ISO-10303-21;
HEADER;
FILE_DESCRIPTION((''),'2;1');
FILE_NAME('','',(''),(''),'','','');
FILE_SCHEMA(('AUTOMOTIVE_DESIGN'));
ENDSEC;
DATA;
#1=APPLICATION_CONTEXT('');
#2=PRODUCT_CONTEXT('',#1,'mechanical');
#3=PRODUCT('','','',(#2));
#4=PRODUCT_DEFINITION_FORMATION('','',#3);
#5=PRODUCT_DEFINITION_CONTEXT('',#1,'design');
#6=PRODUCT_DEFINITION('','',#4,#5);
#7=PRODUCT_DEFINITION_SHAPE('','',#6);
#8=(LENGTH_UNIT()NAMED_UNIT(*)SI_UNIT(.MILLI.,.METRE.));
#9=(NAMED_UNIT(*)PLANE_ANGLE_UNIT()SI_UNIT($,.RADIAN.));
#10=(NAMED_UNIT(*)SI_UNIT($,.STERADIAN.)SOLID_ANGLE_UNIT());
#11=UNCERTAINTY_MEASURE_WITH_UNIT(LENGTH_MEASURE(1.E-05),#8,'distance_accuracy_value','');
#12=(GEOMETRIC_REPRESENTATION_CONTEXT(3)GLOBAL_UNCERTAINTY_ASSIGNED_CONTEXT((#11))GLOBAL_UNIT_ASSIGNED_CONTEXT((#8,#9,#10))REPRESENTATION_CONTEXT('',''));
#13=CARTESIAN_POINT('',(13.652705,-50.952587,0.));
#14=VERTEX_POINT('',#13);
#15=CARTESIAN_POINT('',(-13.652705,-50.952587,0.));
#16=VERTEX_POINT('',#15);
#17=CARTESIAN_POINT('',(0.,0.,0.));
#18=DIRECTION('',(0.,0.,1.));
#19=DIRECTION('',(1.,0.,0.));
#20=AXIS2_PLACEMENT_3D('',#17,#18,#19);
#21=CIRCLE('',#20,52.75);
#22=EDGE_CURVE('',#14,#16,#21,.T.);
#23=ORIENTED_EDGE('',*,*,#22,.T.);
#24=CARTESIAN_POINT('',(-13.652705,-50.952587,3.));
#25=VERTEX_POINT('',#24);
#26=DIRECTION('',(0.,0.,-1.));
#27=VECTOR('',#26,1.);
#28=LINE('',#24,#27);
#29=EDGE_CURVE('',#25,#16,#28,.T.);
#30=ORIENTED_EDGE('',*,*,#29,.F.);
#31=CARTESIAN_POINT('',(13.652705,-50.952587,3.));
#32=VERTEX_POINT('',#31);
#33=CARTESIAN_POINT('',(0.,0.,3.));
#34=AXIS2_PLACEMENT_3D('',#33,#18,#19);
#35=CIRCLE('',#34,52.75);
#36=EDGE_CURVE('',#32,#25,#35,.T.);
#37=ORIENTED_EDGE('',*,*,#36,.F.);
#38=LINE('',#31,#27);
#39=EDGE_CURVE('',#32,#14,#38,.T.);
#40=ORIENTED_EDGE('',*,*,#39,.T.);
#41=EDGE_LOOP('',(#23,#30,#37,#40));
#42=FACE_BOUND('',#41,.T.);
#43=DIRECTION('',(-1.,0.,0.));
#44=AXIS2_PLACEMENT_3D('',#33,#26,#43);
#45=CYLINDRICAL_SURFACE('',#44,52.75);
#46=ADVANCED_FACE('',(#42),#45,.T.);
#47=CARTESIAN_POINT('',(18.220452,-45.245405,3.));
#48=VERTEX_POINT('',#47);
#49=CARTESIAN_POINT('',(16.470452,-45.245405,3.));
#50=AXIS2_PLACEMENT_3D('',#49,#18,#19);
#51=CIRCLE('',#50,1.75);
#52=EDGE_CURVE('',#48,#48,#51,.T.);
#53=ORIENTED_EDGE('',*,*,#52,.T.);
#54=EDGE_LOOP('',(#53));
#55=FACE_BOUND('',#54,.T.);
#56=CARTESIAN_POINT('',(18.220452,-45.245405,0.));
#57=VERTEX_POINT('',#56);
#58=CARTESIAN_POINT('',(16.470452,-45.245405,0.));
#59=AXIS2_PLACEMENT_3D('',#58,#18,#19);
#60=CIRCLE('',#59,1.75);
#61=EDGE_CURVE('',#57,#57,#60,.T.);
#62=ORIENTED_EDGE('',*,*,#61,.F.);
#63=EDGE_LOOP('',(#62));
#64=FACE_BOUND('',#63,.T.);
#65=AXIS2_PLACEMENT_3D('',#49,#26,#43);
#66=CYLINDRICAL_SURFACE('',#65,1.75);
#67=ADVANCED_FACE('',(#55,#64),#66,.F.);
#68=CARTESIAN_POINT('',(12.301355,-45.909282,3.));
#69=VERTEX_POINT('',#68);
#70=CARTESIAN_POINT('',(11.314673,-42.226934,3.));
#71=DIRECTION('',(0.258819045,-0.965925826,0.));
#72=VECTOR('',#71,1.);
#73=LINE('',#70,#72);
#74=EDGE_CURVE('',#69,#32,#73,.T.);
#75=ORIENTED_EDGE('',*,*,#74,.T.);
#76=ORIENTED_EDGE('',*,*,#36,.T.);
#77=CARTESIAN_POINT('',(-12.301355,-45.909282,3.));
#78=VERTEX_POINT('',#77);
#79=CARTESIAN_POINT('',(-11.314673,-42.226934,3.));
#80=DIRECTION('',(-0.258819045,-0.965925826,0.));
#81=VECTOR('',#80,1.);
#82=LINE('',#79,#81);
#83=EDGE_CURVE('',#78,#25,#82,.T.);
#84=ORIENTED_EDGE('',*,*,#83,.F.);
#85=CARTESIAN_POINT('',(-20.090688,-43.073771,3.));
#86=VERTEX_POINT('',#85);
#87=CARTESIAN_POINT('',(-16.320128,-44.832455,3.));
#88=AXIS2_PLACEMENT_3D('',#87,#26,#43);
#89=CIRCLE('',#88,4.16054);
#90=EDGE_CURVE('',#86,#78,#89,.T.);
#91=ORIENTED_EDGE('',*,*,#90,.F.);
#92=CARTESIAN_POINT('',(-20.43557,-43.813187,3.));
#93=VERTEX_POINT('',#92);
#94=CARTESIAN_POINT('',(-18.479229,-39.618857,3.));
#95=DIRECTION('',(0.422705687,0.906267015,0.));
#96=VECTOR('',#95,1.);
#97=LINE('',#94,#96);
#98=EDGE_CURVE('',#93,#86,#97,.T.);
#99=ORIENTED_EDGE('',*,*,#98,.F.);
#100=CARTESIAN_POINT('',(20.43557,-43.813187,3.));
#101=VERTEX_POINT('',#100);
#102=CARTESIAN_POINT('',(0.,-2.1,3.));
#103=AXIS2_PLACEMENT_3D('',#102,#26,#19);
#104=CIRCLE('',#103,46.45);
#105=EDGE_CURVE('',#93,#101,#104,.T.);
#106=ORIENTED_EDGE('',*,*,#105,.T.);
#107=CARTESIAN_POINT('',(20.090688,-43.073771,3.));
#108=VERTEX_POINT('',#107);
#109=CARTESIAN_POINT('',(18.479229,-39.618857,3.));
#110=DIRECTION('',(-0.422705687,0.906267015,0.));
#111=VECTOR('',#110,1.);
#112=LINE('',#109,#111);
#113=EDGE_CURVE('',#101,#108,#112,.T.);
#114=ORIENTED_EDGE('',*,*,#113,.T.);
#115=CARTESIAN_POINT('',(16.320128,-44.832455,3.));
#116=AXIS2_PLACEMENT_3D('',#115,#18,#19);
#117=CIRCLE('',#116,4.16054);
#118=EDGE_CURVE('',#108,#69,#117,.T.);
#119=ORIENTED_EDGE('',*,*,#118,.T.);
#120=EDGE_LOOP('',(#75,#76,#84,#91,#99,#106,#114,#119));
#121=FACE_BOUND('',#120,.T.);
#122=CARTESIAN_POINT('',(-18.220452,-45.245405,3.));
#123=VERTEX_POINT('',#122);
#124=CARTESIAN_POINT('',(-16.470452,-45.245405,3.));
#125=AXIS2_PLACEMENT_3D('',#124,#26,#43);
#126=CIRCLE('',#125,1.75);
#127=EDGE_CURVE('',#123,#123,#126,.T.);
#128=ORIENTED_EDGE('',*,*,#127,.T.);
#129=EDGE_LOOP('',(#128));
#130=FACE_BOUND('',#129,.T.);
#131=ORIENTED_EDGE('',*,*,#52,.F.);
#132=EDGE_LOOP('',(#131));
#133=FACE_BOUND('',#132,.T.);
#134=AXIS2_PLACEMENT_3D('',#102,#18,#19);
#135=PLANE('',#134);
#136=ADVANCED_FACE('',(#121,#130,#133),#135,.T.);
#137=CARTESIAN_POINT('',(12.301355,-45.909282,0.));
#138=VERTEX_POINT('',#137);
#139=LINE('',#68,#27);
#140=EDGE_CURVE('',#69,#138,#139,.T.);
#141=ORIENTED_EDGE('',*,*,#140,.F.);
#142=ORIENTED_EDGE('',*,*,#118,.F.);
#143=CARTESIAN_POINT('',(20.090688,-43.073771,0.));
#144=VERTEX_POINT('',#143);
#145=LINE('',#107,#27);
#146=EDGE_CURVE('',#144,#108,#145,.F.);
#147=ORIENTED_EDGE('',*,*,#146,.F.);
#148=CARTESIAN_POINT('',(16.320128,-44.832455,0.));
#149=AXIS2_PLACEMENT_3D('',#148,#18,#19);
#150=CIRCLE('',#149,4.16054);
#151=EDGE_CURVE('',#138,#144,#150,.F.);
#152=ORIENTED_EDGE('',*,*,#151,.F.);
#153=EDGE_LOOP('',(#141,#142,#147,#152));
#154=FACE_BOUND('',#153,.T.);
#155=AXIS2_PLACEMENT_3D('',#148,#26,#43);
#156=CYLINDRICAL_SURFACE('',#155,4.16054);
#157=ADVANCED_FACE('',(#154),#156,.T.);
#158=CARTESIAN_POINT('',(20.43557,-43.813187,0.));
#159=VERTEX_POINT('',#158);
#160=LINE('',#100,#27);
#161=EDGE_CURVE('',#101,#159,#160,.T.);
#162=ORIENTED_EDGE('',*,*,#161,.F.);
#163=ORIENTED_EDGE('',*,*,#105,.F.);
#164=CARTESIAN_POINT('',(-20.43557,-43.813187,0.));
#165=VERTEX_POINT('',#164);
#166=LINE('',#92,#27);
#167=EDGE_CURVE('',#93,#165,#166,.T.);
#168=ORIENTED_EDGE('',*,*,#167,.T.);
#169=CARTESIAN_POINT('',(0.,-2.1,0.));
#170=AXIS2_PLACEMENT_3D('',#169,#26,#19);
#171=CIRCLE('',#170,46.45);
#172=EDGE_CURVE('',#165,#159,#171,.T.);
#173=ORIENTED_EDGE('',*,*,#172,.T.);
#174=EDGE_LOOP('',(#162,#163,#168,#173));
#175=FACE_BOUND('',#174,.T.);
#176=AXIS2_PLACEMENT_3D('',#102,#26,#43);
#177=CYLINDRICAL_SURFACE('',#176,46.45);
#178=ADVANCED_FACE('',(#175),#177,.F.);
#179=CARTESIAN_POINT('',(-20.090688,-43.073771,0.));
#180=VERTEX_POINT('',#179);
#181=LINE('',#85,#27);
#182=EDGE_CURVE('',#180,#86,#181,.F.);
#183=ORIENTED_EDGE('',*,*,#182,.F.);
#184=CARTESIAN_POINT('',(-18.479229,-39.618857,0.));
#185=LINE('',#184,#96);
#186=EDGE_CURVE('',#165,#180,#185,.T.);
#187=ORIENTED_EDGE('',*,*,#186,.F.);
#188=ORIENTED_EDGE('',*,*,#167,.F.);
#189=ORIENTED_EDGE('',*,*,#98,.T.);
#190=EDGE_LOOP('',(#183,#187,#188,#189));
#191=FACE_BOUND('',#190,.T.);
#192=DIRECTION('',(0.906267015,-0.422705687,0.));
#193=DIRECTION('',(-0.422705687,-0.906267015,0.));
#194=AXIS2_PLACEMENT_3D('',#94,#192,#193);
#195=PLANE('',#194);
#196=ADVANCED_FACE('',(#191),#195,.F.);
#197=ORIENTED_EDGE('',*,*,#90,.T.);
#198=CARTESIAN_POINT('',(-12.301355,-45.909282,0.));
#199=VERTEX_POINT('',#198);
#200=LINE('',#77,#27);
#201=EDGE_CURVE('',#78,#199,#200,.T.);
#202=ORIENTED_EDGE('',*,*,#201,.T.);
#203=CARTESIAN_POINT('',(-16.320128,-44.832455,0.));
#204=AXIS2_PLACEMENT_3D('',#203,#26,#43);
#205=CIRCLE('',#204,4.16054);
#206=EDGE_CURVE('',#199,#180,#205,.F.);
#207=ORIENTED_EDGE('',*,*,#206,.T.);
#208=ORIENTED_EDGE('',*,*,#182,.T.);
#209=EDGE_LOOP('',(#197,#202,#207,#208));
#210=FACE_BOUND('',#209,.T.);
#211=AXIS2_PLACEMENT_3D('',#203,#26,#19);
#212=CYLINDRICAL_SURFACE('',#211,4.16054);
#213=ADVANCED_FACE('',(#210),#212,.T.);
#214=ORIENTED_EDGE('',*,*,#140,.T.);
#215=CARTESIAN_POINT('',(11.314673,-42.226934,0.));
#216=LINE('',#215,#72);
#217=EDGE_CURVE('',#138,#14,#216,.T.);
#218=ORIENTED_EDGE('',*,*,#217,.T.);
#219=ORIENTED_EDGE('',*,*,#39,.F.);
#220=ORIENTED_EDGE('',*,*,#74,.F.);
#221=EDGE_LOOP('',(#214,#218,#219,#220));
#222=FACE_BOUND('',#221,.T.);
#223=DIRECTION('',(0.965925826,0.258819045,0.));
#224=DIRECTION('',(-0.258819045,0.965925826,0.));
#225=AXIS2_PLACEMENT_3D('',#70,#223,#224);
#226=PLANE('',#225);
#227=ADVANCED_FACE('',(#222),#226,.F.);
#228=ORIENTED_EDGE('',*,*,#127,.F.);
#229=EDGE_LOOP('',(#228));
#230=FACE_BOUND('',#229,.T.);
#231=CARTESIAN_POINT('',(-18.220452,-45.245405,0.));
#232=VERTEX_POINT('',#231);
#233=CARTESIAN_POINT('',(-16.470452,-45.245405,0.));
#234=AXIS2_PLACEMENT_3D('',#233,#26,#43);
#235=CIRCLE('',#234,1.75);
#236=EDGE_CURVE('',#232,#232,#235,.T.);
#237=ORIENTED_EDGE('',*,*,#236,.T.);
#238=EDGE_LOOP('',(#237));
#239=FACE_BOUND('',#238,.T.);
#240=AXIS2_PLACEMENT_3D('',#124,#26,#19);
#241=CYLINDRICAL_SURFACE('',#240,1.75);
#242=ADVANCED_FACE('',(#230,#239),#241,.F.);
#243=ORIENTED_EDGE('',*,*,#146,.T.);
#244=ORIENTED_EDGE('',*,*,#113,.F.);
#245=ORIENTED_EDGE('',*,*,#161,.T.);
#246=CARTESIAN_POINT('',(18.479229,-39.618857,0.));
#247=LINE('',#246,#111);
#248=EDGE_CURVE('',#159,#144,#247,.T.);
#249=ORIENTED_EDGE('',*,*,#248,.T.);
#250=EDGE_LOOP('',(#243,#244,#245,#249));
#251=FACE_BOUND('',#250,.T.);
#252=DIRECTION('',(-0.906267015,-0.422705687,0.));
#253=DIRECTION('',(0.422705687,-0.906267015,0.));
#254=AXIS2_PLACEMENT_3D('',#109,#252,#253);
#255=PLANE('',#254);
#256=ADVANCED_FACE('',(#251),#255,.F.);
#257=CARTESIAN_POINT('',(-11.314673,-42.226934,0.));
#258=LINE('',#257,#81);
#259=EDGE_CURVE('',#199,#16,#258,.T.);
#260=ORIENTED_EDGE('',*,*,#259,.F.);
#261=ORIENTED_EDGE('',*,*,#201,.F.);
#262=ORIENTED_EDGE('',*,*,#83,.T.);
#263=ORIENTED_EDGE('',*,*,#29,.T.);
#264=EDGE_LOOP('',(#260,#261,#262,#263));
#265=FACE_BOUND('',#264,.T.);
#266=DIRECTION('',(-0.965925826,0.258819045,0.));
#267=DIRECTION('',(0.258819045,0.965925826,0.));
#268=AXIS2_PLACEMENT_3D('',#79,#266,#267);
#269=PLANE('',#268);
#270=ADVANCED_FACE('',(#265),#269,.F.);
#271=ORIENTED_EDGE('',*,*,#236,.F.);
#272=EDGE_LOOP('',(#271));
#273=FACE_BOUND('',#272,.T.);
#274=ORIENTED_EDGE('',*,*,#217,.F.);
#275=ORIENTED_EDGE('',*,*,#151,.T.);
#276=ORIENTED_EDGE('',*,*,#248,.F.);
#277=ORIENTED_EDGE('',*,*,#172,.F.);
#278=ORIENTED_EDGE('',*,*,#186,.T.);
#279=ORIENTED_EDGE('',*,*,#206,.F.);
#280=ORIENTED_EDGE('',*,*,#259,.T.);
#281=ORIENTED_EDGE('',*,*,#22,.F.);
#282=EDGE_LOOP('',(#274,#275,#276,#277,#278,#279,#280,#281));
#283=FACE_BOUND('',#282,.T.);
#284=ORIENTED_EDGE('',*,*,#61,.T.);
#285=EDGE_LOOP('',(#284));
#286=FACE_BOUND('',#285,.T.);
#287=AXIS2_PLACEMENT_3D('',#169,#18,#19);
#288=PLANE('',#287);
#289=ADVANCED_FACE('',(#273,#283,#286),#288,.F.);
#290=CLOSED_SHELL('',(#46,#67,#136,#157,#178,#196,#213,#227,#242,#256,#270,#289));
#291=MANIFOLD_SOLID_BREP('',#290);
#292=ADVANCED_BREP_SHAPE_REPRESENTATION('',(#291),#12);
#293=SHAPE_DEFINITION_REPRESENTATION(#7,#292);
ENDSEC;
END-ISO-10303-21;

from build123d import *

# Parameters (mm, degrees)
SKETCH2_R           = 1.75
BOSS_EXTRUDE1_DEPTH = 3
FILLET1_R           = 4.16054


with BuildPart() as part:
    # Sketch2 → Boss-Extrude1 (new body)
    with BuildSketch(Plane.XY):
        with BuildLine():
            Line((18.479229397, -39.61885681), (20.435570278, -43.813186973))
            ThreePointArc((20.435570278, -43.813186973), (45.250304059, 8.388683548), (0, 44.35))
            Line((0, 44.35), (0, 52.75))
            ThreePointArc((0, 52.75), (52.298716437, 6.88525664), (13.652704629, -50.952587337))
            Line((13.652704629, -50.952587337), (11.314672737, -42.226933525))
            Line((11.314672737, -42.226933525), (18.479229397, -39.61885681))
        make_face()
        with Locations((16.470452213, -45.245405335)):
            Circle(SKETCH2_R, mode=Mode.SUBTRACT)
    extrude(amount=BOSS_EXTRUDE1_DEPTH)

    # Fillet1
    fillet1_edges = [part.edges().sort_by_distance(p)[0] for p in [
        (18.479229397, -39.61885681, 1.5),
        (11.314672737, -42.226933525, 1.5),
    ]]
    fillet(fillet1_edges, radius=FILLET1_R - 0.0001)  # a hair under: the kernel refuses the full size

    # Mirror1: part across plane


with BuildPart() as part_1:
    add(part.part)
    add(part.part.mirror(Plane(origin=(0, 52.75, 3), x_dir=(0, 0, 1), z_dir=(1, 0, 0))))


solid = part_1.part
